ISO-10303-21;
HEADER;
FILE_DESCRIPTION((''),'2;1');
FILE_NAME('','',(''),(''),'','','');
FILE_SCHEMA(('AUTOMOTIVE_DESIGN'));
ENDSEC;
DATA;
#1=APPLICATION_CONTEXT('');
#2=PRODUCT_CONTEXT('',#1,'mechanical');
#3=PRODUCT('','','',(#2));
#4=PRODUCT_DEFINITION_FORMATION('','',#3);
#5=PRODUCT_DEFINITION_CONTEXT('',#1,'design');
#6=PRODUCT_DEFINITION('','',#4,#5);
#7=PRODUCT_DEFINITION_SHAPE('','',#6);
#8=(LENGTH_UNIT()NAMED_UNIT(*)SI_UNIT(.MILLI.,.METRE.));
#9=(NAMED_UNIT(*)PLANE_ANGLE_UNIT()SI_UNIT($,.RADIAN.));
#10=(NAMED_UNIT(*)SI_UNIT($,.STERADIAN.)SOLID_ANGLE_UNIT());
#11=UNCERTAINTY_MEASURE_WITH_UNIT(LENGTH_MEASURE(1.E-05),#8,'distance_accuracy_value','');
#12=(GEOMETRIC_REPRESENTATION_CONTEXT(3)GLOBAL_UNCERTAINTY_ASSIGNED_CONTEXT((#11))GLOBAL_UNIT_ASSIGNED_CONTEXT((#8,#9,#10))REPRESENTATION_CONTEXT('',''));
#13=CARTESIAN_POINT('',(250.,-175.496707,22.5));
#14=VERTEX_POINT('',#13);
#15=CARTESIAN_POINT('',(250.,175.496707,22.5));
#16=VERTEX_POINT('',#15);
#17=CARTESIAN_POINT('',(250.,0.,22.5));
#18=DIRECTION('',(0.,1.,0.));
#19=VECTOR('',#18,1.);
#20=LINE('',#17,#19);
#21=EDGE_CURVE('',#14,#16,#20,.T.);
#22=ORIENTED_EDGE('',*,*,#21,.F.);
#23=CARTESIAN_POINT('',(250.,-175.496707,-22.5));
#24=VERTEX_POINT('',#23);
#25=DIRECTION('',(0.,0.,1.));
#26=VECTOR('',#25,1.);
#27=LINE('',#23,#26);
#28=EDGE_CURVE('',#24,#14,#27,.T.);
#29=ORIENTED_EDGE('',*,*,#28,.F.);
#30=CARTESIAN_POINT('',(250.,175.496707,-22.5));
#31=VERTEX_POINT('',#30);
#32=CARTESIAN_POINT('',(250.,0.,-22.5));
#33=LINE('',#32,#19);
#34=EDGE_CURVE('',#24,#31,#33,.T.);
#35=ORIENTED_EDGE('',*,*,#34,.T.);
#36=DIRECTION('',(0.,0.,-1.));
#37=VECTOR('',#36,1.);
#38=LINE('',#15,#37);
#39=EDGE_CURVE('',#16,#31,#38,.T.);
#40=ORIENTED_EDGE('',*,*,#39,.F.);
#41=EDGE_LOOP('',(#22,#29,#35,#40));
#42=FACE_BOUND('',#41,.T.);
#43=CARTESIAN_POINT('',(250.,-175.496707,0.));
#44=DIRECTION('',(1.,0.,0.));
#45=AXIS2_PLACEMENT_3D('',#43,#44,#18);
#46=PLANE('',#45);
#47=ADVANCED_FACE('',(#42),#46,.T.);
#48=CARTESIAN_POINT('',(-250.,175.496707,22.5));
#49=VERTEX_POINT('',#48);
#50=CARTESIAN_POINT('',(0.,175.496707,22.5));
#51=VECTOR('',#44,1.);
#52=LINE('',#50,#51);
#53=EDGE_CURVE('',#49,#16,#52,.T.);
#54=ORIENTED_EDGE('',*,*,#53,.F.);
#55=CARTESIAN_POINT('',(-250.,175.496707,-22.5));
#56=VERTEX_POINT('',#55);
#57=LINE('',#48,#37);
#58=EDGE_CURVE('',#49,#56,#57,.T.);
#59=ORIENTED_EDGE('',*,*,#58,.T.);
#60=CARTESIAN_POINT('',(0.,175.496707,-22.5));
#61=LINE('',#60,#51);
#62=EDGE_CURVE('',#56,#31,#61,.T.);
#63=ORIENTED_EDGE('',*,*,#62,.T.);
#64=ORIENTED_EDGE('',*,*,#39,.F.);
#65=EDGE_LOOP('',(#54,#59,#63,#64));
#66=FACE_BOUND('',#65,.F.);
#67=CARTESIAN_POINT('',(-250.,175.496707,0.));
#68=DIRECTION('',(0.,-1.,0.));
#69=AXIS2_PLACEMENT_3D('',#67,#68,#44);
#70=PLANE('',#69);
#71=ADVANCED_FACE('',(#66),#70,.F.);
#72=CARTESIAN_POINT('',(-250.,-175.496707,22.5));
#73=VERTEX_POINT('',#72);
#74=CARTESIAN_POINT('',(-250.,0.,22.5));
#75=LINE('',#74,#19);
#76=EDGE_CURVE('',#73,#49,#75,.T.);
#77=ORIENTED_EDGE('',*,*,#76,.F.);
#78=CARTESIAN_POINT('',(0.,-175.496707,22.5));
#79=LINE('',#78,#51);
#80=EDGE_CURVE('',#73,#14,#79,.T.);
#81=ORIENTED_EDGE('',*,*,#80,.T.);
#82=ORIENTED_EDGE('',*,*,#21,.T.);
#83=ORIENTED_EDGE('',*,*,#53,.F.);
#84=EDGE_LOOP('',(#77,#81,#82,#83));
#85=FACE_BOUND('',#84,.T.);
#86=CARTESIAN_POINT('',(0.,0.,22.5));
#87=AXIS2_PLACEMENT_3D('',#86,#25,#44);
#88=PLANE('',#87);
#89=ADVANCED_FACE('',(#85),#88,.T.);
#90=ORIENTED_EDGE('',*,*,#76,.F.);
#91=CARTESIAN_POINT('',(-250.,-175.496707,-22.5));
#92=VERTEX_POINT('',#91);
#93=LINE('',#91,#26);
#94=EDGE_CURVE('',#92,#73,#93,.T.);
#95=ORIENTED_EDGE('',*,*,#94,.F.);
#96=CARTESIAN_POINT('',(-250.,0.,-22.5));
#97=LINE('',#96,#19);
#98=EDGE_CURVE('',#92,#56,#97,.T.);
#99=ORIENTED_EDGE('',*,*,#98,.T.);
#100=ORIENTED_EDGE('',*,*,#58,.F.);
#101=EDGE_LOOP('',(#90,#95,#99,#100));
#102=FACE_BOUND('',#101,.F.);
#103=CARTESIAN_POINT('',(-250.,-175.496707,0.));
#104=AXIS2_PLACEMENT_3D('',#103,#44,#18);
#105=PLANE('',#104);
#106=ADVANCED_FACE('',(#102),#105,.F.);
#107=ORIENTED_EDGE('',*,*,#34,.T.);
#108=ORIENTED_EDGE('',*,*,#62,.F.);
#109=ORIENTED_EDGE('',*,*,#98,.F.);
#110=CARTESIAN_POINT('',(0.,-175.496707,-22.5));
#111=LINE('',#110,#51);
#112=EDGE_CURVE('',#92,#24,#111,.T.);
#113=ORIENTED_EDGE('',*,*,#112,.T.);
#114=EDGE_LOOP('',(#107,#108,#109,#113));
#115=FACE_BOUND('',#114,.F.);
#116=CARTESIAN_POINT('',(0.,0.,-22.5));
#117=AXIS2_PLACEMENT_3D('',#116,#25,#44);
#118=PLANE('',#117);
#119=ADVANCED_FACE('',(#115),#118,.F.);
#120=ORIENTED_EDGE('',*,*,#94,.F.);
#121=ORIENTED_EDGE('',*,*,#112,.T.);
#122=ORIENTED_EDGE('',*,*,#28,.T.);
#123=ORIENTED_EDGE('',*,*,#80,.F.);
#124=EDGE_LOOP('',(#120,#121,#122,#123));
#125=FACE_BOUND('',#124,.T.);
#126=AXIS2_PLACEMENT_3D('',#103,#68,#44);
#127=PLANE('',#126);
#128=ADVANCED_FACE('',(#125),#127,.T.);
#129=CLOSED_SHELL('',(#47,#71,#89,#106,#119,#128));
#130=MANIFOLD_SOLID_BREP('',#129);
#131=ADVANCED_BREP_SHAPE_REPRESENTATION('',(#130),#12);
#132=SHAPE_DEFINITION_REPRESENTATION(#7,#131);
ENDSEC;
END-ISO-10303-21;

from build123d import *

# Parameters (mm, degrees)
F0_W     = 500
F0_H     = 350.9934146229
F1_DEPTH = 22.5


# Not quite as in the source:
# - a feature of the source that left no trace in its solid (it failed there, or was rolled back) is left out
# - the program builds the solid bodies; features that only make, move or delete a surface that nothing else refers to are left out


with BuildPart() as f1:
    # F0 (on Top) → F1 (new body, symmetric)
    with BuildSketch(Plane.XY):
        Rectangle(F0_W, F0_H)
    extrude(amount=F1_DEPTH, both=True)


solid = f1.part
